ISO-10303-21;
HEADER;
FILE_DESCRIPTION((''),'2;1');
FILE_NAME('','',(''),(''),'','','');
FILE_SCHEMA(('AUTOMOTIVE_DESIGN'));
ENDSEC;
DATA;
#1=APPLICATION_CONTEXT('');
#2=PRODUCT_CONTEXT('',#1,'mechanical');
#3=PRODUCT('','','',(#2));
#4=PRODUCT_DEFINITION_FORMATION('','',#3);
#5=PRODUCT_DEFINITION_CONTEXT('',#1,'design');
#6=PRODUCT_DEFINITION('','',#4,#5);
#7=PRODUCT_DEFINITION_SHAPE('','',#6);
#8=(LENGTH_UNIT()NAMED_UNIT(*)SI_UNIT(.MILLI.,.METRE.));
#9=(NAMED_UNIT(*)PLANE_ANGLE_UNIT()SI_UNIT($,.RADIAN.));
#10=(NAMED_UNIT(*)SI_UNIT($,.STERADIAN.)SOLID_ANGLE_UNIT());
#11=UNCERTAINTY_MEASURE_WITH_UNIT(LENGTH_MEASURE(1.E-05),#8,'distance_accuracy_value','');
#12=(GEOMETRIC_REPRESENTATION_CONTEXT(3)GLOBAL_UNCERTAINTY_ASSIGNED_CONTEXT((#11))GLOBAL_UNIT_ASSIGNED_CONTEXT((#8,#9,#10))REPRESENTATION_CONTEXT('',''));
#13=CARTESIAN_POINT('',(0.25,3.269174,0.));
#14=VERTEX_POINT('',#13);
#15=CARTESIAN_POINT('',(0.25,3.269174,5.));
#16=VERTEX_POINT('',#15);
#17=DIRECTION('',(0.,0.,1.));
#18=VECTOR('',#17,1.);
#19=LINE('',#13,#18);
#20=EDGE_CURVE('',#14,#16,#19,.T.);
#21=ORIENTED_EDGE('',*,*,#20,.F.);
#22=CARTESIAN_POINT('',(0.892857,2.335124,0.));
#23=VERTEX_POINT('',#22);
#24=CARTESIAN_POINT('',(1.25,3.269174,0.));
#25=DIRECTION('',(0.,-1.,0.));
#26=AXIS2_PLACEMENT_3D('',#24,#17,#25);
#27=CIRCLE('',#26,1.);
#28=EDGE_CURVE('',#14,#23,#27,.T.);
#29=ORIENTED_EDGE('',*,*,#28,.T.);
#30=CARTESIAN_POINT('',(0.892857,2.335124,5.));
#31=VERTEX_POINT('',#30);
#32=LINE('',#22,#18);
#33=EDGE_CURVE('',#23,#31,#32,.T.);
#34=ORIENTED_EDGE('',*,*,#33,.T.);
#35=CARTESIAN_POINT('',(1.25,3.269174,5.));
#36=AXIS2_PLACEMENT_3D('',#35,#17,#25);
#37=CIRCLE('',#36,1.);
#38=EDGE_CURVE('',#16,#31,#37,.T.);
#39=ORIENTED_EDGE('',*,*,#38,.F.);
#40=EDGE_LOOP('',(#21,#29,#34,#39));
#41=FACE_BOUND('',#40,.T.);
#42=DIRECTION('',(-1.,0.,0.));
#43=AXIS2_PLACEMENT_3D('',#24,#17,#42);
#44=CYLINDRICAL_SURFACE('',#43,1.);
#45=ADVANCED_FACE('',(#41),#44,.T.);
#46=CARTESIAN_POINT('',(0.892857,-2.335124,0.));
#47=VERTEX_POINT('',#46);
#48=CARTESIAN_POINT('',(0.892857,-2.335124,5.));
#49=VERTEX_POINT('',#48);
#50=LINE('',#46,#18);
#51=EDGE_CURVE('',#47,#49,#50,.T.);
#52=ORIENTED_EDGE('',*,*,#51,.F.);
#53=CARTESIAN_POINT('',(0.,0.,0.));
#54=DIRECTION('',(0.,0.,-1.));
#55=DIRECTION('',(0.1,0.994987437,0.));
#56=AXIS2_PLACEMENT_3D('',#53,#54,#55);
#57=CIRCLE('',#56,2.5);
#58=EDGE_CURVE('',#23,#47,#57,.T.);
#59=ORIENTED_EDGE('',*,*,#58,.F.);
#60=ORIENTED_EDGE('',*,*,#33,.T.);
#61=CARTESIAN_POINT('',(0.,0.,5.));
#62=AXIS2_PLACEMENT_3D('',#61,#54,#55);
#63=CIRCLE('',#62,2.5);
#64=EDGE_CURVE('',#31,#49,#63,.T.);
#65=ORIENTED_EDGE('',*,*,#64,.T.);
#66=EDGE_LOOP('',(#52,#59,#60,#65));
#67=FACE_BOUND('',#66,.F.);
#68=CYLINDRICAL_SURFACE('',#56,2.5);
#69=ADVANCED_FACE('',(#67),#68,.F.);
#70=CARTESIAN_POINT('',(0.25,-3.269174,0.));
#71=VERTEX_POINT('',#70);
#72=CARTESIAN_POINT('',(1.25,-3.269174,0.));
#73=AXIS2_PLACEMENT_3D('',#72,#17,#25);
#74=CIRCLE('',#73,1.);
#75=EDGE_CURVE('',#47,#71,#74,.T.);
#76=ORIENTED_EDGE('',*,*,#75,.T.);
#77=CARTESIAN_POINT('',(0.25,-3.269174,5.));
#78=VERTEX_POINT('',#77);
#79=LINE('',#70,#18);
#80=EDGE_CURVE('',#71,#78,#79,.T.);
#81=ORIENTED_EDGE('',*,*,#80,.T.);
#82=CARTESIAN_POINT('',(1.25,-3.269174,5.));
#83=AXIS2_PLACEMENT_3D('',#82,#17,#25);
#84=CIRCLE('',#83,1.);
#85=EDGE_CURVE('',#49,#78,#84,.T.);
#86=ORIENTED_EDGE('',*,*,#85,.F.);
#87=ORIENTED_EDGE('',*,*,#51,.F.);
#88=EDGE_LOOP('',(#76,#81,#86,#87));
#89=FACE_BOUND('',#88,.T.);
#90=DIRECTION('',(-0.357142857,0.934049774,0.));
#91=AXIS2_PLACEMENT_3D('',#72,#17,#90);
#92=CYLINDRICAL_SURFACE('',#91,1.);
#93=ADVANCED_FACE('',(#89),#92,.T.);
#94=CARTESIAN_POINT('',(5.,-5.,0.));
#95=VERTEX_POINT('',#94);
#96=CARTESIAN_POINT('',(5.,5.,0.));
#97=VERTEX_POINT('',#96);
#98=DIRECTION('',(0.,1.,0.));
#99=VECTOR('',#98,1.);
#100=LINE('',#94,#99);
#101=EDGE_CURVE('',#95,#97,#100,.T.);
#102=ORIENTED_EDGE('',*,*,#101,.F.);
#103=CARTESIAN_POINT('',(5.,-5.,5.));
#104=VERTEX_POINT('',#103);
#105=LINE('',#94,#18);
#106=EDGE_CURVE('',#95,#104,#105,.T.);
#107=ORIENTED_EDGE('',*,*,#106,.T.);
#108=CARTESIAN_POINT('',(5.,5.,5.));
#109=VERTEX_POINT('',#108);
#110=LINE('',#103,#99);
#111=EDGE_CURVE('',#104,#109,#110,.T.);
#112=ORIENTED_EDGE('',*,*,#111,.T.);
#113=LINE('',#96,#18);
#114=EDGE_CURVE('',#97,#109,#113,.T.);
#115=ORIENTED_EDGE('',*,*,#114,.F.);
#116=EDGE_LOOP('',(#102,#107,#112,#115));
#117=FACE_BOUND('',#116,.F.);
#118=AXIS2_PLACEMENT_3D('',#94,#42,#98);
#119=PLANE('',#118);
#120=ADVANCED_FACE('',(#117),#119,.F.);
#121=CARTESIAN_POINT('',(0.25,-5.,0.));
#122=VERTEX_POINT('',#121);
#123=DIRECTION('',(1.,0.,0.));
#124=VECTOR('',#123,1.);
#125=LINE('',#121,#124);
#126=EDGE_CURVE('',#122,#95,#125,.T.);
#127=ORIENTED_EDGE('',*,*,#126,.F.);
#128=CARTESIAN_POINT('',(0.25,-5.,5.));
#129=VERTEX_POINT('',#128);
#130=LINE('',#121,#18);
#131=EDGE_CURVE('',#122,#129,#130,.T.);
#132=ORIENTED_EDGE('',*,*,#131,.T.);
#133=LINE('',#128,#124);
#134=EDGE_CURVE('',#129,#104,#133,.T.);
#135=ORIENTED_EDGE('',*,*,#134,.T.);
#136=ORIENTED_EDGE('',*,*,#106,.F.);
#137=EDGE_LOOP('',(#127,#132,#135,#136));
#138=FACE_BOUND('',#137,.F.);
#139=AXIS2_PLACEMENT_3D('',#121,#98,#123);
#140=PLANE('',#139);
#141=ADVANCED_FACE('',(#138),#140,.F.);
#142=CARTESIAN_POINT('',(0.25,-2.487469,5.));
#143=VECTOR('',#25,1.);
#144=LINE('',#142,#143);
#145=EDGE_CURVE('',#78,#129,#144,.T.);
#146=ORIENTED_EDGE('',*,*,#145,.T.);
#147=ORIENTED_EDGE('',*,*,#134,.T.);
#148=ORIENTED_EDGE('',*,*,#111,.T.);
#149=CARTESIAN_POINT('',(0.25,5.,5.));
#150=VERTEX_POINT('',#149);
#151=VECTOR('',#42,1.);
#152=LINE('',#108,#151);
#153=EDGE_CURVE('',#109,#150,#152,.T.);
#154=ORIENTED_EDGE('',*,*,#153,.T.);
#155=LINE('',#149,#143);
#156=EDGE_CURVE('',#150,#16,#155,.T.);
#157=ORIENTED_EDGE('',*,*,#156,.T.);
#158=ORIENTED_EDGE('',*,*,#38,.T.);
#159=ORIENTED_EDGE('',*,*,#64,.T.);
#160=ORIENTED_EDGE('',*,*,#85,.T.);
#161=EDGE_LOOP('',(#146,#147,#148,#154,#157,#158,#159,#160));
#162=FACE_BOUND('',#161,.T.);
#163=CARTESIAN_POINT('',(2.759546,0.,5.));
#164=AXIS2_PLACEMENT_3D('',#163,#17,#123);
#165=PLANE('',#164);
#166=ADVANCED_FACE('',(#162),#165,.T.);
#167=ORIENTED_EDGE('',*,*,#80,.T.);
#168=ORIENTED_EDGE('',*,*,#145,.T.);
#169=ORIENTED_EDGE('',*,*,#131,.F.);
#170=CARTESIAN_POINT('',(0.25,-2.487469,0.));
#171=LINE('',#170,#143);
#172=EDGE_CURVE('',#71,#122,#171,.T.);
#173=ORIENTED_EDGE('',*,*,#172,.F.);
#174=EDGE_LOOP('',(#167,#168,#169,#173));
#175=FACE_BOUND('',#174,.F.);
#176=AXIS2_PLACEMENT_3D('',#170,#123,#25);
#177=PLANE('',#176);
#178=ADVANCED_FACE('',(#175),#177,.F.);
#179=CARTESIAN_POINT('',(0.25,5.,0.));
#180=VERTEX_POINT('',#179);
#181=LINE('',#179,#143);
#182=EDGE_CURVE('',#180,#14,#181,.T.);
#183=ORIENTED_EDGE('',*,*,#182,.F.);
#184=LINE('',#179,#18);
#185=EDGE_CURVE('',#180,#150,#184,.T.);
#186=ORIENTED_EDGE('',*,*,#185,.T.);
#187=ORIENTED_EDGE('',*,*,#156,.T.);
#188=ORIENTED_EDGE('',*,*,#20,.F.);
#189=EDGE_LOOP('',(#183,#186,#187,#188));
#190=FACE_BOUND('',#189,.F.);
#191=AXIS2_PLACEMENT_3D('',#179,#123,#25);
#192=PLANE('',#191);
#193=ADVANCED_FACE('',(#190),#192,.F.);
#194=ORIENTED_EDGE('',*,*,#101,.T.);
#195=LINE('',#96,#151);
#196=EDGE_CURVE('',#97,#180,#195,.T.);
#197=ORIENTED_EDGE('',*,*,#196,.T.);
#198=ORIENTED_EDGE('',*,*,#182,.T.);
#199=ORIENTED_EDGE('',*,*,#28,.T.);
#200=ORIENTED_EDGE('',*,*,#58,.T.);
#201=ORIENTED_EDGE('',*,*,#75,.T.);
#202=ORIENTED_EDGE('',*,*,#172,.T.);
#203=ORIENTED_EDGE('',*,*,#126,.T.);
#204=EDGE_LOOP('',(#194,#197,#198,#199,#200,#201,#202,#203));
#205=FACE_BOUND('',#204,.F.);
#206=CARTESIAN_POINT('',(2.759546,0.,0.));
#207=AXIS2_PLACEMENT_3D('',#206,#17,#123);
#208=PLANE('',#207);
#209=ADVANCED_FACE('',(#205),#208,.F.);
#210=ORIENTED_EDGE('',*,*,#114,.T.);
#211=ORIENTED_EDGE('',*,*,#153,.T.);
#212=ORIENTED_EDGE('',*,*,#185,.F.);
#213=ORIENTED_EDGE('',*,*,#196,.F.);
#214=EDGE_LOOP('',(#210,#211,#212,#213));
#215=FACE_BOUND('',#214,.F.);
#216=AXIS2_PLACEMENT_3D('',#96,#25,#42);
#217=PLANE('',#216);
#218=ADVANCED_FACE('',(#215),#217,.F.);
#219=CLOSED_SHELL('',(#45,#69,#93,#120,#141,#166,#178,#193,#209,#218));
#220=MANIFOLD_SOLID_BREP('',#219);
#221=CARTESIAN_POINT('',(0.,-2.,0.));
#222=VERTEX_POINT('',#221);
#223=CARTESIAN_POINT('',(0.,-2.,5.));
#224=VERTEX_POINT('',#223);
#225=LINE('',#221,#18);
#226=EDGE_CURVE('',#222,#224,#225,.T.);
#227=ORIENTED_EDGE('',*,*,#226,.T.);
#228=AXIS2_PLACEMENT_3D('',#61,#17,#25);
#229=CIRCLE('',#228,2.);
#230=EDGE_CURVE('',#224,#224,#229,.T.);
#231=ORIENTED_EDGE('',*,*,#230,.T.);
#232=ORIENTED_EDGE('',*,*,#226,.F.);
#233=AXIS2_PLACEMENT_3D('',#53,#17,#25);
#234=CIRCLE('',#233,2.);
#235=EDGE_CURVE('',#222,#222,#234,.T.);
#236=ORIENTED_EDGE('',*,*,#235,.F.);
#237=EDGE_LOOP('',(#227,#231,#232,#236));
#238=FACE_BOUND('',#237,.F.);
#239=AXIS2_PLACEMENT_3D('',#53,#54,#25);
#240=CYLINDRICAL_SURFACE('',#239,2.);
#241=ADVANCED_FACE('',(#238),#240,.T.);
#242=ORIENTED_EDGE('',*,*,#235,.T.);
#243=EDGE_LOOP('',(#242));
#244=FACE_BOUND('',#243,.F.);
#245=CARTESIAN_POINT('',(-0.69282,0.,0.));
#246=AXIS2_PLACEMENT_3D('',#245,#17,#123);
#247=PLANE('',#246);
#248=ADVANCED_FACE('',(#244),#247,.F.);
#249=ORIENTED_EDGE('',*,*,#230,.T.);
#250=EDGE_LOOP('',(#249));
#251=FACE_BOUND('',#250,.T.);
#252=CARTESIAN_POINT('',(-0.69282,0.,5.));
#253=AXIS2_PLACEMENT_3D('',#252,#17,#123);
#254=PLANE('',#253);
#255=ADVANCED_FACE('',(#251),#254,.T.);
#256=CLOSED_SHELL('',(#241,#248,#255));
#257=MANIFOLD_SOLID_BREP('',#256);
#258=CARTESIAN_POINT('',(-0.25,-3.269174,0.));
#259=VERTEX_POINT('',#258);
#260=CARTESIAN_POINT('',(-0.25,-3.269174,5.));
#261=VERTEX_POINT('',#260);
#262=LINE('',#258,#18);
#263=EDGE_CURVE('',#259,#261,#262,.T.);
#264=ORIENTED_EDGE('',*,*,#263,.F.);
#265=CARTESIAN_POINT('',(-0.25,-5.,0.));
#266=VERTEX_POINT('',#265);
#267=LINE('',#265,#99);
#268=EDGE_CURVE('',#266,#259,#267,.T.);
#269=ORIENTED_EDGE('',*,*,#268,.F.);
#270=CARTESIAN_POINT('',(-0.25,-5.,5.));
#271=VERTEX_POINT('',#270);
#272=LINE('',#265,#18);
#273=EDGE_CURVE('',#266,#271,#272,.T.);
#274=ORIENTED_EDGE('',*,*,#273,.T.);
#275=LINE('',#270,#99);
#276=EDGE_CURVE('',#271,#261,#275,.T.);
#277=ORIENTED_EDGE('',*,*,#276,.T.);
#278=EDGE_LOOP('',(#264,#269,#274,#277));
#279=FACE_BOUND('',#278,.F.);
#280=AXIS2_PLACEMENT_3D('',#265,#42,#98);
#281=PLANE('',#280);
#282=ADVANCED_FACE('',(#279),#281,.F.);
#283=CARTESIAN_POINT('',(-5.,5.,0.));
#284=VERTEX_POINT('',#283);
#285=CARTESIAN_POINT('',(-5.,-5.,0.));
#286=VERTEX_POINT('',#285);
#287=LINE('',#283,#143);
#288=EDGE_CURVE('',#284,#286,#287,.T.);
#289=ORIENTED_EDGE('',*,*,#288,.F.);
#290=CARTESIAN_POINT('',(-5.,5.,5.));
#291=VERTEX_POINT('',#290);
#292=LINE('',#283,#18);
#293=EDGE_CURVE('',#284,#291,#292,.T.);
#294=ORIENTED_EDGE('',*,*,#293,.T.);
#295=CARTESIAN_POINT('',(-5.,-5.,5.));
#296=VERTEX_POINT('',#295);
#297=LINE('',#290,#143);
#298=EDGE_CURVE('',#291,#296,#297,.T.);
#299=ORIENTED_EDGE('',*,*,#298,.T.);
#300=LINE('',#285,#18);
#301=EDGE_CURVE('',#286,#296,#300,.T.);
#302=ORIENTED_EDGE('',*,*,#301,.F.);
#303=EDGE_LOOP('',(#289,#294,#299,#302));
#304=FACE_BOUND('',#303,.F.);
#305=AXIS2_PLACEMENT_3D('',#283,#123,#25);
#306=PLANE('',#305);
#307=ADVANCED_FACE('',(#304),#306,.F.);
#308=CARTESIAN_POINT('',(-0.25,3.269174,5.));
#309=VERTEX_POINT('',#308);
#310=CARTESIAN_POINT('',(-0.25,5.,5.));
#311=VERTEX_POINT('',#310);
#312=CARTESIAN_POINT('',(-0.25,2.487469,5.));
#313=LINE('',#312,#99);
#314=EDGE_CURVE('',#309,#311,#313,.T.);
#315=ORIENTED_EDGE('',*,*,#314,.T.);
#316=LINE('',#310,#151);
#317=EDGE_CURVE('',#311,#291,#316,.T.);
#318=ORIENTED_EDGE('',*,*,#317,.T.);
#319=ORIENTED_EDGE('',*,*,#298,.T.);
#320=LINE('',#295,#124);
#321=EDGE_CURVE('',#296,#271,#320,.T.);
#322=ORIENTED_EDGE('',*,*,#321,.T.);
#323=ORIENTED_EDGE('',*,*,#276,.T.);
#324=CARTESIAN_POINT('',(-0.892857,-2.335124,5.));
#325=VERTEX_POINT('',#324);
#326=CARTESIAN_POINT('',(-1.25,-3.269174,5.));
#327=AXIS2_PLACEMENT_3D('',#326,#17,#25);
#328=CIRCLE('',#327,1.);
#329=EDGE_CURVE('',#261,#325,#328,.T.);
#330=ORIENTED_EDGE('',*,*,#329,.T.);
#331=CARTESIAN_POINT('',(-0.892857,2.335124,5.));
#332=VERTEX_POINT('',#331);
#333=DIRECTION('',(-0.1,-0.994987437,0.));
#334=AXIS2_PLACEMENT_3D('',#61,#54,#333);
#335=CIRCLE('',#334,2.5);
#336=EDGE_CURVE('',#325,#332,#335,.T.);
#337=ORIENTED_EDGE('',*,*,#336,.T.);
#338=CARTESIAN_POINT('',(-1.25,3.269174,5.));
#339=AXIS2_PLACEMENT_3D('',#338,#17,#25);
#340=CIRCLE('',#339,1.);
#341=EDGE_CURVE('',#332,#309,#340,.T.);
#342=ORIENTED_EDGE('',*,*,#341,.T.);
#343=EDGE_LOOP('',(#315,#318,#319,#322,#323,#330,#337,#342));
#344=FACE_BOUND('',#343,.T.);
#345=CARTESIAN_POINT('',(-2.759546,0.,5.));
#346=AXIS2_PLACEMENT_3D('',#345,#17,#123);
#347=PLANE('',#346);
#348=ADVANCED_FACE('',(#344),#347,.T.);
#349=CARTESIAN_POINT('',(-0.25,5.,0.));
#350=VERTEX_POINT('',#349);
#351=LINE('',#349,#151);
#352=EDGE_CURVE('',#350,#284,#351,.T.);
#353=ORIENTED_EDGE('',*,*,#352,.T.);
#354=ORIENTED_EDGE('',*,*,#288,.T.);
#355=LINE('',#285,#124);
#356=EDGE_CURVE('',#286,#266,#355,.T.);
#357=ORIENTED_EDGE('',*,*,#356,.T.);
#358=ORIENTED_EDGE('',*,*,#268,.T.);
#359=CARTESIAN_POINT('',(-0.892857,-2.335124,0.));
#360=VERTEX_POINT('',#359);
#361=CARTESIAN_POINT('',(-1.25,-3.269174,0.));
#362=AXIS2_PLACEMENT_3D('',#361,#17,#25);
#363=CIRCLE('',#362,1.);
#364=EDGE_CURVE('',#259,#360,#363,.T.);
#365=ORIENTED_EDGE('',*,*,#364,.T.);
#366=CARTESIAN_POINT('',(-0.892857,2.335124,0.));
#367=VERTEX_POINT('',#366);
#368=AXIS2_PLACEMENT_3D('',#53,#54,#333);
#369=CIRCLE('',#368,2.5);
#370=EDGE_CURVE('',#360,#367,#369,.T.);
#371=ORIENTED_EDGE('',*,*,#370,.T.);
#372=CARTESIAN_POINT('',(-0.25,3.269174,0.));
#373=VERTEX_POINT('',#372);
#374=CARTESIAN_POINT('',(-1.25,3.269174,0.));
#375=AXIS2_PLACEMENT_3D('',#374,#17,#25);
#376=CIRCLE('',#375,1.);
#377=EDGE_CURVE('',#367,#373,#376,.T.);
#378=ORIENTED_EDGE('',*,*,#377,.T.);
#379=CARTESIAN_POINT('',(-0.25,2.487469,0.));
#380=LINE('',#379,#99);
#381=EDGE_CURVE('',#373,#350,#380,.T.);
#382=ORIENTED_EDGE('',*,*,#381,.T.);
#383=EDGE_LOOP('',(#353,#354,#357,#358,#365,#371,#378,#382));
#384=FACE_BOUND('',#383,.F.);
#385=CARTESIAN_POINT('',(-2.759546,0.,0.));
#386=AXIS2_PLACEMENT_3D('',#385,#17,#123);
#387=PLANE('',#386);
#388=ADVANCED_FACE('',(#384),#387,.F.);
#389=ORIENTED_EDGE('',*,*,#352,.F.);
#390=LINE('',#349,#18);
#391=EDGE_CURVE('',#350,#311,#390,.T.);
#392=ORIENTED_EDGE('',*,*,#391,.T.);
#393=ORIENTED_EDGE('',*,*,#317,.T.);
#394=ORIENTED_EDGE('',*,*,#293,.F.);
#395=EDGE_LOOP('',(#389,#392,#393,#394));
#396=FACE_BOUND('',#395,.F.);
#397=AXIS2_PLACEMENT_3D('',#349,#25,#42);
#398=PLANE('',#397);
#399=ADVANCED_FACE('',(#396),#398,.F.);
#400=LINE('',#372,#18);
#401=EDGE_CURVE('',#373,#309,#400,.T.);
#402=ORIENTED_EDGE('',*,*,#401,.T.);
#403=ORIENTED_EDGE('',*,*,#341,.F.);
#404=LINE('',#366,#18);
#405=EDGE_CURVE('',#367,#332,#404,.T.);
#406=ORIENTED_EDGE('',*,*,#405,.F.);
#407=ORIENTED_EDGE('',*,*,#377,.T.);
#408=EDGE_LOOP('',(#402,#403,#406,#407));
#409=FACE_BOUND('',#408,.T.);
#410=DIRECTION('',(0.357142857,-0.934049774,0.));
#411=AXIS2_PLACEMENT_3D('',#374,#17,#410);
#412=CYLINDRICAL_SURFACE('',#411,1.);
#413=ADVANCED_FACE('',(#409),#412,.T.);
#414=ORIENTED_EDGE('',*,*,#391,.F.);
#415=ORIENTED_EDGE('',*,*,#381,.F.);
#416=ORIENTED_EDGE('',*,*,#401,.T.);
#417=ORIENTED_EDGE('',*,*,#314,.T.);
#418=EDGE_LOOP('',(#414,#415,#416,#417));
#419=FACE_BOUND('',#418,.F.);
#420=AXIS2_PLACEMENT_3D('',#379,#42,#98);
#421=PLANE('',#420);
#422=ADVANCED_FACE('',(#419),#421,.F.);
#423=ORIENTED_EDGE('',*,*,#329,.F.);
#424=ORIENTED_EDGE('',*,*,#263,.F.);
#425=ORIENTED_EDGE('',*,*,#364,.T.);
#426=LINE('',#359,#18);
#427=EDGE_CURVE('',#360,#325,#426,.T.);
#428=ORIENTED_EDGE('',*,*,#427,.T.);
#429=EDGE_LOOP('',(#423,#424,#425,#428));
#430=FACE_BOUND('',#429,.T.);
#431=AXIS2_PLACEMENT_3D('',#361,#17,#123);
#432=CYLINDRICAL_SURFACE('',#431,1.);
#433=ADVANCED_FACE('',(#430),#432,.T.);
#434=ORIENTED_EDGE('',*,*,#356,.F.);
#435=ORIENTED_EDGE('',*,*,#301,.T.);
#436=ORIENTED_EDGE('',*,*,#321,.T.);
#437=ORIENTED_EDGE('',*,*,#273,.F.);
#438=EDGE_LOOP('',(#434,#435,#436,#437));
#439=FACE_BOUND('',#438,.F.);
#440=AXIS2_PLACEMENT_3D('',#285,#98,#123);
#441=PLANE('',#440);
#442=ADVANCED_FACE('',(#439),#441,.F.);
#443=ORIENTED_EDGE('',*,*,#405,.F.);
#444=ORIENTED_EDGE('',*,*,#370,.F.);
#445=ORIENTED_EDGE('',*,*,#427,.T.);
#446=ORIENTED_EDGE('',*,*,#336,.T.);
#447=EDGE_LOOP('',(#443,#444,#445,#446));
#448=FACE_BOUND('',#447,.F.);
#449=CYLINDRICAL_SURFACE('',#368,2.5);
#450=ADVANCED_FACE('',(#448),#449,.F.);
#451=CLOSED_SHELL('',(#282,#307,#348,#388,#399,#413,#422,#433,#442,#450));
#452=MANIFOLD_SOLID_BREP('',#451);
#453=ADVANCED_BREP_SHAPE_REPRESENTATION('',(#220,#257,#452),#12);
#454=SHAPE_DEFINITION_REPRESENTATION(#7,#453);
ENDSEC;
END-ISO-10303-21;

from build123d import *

# Parameters (mm, degrees)
F1_DEPTH = 5
F2_R     = 1
F2_2_R   = 1


# Not quite as in the source:
# - a feature names something its author has since deleted; it is built from what else it names


with BuildPart() as f1:
    # F0 (on Top) → F1 (new body)
    with BuildSketch(Plane.XY):
        with BuildLine():
            Line((5, -5), (5, 5))
            Line((5, 5), (0.25, 5))
            Line((0.25, 5), (0.25, 2.4874685928))
            ThreePointArc((0.25, 2.4874685928), (2.5, 0), (0.25, -2.4874685928))
            Line((0.25, -2.4874685928), (0.25, -5))
            Line((0.25, -5), (5, -5))
        make_face()
    extrude(amount=F1_DEPTH)

    # F2
    f2_edges = [f1.edges().sort_by_distance(p)[0] for p in [
        (0.25, -2.487469, 2.5),
        (0.25, 2.487469, 2.5),
    ]]
    fillet(f2_edges, radius=F2_R)


with BuildPart() as f1b:
    # F0 (on Top) → F1, piece 2 (new body)
    with BuildSketch(Plane.XY):
        with BuildLine():
            Line((-0.25, 5), (-5, 5))
            Line((-5, 5), (-5, -5))
            Line((-5, -5), (-0.25, -5))
            Line((-0.25, -5), (-0.25, -2.4874685928))
            ThreePointArc((-0.25, -2.4874685928), (-2.5, 0), (-0.25, 2.4874685928))
            Line((-0.25, 2.4874685928), (-0.25, 5))
        make_face()
    extrude(amount=F1_DEPTH)

    # F2#2
    f2_2_edges = [f1b.edges().sort_by_distance(p)[0] for p in [
        (-0.25, -2.487469, 2.5),
        (-0.25, 2.487469, 2.5),
    ]]
    fillet(f2_2_edges, radius=F2_2_R)


with BuildPart() as f1c:
    # F0 (on Top) → F1, piece 3 (new body)
    with BuildSketch(Plane.XY):
        with BuildLine():
            ThreePointArc((0, 2), (-2, 0), (0, -2))
            Line((0, -2), (0, 2))
        make_face()
        with BuildLine():
            Line((0, 2), (0, -2))
            ThreePointArc((0, -2), (2, 0), (0, 2))
        make_face()
    extrude(amount=F1_DEPTH)


solid = Compound([f1.part, f1b.part, f1c.part])
